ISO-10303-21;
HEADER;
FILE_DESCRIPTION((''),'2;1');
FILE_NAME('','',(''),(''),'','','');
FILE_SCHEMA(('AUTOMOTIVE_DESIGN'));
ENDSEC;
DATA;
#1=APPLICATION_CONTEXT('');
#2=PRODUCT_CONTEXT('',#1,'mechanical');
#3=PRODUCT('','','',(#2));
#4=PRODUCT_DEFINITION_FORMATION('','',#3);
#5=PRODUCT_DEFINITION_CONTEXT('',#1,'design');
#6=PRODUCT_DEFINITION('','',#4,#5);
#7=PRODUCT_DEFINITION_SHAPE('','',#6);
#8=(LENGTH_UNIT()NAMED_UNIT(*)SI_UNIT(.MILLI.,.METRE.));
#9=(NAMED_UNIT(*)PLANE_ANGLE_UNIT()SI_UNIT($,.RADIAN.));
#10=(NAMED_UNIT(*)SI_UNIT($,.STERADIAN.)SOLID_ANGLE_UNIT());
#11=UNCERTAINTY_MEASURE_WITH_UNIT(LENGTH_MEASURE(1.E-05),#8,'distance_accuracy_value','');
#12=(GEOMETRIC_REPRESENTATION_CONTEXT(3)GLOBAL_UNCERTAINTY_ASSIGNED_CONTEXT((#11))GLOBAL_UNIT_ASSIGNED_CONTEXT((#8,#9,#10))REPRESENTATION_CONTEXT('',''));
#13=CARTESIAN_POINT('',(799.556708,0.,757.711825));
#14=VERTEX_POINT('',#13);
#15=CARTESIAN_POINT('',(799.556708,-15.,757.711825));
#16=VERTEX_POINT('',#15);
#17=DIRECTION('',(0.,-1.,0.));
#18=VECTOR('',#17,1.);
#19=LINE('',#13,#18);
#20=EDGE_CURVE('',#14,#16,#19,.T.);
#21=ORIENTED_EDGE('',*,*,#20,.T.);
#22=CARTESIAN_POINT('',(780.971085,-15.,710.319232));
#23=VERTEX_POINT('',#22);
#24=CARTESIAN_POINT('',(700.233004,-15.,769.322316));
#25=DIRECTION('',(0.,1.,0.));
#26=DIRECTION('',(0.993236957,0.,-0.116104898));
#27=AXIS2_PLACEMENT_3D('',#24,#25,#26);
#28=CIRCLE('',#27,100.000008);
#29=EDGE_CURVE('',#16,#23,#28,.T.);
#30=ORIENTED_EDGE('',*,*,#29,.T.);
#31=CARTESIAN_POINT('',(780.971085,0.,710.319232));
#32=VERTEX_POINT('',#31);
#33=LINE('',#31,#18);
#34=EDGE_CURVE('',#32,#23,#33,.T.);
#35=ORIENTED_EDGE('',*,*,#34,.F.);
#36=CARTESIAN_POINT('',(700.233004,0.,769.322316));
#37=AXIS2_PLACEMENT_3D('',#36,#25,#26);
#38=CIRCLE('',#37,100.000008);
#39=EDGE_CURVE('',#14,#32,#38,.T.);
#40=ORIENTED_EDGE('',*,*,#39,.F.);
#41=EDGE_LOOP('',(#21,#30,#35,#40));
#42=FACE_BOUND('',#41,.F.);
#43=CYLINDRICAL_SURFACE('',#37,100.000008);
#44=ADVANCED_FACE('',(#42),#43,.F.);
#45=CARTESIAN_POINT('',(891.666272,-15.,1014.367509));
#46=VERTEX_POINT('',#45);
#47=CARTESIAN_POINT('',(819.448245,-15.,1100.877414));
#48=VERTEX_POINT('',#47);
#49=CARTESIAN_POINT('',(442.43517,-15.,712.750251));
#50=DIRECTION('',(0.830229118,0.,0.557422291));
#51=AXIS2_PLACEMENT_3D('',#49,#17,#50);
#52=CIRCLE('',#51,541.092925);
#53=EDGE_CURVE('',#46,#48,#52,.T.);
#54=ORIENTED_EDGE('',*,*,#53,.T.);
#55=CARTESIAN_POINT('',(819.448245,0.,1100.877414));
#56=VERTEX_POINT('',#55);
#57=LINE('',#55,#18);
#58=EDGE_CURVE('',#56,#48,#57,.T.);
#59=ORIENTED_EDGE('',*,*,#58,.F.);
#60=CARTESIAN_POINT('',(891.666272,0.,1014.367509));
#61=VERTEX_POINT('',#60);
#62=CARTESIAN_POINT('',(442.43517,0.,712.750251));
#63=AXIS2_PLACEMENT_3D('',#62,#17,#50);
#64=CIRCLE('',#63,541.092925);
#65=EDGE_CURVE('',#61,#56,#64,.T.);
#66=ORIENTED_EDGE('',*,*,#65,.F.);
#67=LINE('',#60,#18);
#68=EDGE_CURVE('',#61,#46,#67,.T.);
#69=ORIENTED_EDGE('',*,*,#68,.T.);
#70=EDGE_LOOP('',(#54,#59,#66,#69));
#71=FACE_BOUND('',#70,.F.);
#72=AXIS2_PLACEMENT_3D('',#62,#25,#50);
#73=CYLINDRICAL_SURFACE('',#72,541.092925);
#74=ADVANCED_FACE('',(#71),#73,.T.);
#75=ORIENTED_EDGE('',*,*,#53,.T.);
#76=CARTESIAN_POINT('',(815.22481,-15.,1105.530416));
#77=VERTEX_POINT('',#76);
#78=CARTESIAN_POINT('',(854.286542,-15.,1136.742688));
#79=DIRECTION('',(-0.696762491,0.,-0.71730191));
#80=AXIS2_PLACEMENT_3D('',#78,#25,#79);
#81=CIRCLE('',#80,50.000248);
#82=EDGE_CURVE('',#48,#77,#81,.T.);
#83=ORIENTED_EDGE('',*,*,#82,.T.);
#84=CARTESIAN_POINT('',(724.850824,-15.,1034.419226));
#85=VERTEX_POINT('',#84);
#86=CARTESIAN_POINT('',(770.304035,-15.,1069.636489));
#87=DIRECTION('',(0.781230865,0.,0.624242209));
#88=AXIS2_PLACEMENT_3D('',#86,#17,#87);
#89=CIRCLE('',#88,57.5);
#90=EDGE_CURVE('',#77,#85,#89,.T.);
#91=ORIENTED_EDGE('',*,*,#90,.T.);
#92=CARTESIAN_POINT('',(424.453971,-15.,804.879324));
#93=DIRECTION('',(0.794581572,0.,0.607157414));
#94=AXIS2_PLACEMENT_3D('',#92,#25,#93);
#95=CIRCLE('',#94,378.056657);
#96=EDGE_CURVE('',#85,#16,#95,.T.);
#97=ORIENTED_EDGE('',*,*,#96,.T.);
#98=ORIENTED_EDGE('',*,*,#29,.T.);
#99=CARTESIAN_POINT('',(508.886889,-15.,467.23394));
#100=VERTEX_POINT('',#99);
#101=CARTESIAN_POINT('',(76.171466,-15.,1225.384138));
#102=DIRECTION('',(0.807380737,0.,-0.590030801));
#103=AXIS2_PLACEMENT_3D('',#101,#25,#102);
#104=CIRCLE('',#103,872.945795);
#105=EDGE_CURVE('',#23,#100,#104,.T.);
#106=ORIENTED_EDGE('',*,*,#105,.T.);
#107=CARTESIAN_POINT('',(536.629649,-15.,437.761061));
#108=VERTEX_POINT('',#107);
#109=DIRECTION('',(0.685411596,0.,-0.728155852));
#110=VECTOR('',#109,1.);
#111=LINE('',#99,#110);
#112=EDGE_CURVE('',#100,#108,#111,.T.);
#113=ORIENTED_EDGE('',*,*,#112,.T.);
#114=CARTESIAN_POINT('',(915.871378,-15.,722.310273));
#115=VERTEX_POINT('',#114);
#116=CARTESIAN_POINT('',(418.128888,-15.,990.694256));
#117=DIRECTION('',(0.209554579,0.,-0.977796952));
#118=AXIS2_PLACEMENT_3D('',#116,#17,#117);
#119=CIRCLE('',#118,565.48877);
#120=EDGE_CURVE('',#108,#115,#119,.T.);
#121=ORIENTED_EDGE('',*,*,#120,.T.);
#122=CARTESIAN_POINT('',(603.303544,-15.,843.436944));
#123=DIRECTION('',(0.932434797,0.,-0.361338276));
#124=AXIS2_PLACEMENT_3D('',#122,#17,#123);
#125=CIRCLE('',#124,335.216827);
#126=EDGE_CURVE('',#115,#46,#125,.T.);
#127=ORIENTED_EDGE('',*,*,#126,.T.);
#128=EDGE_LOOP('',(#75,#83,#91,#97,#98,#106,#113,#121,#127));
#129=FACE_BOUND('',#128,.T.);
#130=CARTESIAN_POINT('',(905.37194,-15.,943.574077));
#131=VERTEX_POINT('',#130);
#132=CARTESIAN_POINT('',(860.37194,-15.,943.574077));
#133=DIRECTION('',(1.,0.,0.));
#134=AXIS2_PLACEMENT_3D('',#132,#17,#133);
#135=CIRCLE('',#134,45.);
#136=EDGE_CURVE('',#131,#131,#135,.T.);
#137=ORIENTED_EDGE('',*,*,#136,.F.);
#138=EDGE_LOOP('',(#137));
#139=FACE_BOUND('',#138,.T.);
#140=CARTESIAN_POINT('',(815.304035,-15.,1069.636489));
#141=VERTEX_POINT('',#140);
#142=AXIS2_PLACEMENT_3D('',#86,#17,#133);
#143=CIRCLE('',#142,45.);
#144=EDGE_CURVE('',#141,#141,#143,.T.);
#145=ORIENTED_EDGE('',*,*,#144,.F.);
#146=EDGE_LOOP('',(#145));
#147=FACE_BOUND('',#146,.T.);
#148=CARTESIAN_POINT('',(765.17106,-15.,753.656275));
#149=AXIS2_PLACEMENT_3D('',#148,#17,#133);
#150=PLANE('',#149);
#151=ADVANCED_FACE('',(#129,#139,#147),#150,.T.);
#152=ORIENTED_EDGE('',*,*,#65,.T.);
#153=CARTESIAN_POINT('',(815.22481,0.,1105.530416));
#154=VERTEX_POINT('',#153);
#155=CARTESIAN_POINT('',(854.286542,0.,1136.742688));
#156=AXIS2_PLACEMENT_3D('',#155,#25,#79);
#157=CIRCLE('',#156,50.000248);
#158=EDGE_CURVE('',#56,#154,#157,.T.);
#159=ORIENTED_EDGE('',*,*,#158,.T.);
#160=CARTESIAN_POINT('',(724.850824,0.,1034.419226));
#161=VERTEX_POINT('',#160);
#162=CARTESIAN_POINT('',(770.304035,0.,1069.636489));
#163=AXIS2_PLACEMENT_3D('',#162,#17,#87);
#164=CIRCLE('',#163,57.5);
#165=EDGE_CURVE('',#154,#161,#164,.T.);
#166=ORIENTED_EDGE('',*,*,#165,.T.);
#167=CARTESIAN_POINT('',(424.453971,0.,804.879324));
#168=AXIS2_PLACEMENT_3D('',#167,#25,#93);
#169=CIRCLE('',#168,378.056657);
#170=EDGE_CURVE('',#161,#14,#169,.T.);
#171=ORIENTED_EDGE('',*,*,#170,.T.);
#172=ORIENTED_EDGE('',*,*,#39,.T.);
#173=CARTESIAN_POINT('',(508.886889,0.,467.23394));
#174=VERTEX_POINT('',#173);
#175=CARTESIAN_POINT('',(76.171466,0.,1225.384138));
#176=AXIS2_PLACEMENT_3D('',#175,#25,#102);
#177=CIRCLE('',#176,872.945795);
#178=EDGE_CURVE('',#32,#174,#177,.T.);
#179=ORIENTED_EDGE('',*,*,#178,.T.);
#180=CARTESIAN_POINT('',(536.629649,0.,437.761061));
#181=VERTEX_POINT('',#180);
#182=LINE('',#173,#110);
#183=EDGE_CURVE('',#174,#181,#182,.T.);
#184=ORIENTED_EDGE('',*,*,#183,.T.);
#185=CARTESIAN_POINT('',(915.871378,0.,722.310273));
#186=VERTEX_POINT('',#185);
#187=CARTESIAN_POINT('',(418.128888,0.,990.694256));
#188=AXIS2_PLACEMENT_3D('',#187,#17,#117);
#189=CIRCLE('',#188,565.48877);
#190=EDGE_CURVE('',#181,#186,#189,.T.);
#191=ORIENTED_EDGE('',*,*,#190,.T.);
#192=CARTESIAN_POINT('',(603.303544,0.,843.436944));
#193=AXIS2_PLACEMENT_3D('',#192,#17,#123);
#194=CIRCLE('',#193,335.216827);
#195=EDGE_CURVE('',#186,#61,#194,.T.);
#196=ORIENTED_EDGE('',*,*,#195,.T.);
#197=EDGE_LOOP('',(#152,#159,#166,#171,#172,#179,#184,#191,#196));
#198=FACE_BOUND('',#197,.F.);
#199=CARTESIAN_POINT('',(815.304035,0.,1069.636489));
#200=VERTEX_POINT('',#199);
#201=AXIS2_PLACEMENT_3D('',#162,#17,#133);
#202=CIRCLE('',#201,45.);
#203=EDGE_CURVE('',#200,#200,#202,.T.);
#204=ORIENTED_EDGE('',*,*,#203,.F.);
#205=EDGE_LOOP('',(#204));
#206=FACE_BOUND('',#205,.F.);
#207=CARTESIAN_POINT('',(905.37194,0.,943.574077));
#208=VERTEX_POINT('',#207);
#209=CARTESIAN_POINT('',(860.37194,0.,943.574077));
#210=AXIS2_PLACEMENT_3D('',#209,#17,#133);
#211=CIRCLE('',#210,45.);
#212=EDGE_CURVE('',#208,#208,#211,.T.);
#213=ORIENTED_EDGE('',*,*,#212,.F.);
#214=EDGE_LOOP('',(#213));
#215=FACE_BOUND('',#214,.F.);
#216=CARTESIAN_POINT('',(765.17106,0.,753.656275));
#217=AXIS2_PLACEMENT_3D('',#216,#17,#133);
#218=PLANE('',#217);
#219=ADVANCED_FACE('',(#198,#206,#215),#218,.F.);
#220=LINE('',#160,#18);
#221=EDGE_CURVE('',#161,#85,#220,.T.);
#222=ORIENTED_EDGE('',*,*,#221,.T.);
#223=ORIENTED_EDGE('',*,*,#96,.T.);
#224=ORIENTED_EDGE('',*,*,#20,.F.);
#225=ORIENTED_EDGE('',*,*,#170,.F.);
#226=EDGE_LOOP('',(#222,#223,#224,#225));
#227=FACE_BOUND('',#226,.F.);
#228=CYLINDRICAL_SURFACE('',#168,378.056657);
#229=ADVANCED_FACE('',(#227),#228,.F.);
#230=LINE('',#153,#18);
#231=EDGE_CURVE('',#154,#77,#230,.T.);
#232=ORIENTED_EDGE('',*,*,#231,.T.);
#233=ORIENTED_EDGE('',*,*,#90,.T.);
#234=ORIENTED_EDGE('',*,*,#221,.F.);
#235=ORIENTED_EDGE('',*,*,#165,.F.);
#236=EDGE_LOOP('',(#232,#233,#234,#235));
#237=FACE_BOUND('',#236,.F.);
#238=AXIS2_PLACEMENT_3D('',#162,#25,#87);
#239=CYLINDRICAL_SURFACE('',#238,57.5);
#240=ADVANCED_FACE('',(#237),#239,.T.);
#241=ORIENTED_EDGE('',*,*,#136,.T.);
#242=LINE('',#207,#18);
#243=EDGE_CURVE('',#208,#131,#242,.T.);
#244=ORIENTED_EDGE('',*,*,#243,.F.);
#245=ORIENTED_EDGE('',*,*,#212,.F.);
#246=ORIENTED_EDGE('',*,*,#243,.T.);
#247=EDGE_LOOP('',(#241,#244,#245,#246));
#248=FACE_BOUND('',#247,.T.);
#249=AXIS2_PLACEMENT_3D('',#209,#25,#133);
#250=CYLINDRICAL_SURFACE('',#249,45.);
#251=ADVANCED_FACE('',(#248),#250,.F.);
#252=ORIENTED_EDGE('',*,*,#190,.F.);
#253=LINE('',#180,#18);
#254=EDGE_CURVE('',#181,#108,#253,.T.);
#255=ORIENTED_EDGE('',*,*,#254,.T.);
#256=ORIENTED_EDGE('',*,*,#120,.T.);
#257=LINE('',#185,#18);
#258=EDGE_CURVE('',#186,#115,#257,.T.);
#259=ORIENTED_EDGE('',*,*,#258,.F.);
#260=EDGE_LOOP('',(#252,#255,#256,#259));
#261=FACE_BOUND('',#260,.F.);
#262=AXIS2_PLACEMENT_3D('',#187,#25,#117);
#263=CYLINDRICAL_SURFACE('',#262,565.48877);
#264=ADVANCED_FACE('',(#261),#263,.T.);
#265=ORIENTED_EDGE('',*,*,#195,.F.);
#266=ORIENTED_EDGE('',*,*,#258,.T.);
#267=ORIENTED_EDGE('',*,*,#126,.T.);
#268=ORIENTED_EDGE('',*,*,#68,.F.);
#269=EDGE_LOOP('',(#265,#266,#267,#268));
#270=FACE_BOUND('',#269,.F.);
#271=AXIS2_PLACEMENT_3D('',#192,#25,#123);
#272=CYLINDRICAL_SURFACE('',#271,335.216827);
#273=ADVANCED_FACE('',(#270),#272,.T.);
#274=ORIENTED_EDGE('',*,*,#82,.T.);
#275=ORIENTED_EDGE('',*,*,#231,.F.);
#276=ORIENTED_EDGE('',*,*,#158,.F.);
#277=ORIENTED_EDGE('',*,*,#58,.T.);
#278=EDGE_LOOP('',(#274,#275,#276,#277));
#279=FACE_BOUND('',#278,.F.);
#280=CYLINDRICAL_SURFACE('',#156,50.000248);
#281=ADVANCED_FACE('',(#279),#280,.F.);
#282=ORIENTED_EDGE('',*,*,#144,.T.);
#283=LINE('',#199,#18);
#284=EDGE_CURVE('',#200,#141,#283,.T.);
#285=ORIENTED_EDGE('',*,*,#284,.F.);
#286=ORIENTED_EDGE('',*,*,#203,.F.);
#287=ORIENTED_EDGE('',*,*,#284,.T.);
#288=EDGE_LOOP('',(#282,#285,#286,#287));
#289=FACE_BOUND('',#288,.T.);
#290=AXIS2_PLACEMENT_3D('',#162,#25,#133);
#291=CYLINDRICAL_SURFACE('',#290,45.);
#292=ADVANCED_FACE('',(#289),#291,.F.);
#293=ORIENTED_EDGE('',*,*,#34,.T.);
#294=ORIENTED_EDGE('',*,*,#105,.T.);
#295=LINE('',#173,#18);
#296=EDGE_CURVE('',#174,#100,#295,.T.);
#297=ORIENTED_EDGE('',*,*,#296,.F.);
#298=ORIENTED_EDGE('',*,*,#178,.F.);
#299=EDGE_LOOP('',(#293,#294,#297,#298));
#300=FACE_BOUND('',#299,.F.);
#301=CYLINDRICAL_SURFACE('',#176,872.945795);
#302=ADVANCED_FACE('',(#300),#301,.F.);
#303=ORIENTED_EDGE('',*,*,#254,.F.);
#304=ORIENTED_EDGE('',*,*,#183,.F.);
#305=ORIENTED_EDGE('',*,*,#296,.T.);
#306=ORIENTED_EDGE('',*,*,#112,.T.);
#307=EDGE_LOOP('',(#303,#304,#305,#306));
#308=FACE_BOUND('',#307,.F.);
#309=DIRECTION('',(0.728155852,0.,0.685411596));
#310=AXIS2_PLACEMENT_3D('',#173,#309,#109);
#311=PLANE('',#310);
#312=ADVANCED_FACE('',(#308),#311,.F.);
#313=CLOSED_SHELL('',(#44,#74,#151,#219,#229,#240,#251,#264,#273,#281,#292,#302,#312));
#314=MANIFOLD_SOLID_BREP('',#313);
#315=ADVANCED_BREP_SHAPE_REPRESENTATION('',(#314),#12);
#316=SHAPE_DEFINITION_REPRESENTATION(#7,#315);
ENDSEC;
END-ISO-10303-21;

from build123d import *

# Parameters (mm, degrees)
F0_R     = 45
F1_DEPTH = 15


# Not quite as in the source:
# - ends of sketch curves that miss each other by under 0.0002 mm in the source are joined


with BuildPart() as f1:
    # F0 (on Front) → F1 (new body)
    with BuildSketch(Plane.XZ):
        with BuildLine():
            Line((508.886889, 467.23394), (536.629649, 437.761061))
            ThreePointArc((536.629649, 437.761061), (757.5121515647, 538.3707556644), (915.8713779319, 722.3102730367))
            ThreePointArc((915.8713779319, 722.3102730367), (937.3750069367, 871.1241026292), (891.6662720762, 1014.3675090452))
            ThreePointArc((891.6662720762, 1014.3675090452), (857.8155387776, 1059.5076628094), (819.4482445104, 1100.877414496))
            ThreePointArc((819.4482445104, 1100.877414496), (817.2633574779, 1103.137500552), (815.2248101142, 1105.5304160912))
            ThreePointArc((815.2248101142, 1105.5304160912), (734.7474434458, 1114.8247485045), (724.8508240235, 1034.4192260182))
            ThreePointArc((724.8508240235, 1034.4192260182), (789.4425603105, 903.419496525), (799.5567075135, 757.7118249354))
            ThreePointArc((799.5567075135, 757.7118249354), (793.3301361175, 732.8130625575), (780.9710848276, 710.319232126))
            ThreePointArc((780.9710848276, 710.319232126), (657.7707545167, 574.4028574869), (508.886889, 467.23394))
        make_face()
        with Locations((860.37194, 943.574077)):
            Circle(F0_R, mode=Mode.SUBTRACT)
        with Locations((770.304035, 1069.636489)):
            Circle(F0_R, mode=Mode.SUBTRACT)
    extrude(amount=F1_DEPTH)


solid = f1.part
